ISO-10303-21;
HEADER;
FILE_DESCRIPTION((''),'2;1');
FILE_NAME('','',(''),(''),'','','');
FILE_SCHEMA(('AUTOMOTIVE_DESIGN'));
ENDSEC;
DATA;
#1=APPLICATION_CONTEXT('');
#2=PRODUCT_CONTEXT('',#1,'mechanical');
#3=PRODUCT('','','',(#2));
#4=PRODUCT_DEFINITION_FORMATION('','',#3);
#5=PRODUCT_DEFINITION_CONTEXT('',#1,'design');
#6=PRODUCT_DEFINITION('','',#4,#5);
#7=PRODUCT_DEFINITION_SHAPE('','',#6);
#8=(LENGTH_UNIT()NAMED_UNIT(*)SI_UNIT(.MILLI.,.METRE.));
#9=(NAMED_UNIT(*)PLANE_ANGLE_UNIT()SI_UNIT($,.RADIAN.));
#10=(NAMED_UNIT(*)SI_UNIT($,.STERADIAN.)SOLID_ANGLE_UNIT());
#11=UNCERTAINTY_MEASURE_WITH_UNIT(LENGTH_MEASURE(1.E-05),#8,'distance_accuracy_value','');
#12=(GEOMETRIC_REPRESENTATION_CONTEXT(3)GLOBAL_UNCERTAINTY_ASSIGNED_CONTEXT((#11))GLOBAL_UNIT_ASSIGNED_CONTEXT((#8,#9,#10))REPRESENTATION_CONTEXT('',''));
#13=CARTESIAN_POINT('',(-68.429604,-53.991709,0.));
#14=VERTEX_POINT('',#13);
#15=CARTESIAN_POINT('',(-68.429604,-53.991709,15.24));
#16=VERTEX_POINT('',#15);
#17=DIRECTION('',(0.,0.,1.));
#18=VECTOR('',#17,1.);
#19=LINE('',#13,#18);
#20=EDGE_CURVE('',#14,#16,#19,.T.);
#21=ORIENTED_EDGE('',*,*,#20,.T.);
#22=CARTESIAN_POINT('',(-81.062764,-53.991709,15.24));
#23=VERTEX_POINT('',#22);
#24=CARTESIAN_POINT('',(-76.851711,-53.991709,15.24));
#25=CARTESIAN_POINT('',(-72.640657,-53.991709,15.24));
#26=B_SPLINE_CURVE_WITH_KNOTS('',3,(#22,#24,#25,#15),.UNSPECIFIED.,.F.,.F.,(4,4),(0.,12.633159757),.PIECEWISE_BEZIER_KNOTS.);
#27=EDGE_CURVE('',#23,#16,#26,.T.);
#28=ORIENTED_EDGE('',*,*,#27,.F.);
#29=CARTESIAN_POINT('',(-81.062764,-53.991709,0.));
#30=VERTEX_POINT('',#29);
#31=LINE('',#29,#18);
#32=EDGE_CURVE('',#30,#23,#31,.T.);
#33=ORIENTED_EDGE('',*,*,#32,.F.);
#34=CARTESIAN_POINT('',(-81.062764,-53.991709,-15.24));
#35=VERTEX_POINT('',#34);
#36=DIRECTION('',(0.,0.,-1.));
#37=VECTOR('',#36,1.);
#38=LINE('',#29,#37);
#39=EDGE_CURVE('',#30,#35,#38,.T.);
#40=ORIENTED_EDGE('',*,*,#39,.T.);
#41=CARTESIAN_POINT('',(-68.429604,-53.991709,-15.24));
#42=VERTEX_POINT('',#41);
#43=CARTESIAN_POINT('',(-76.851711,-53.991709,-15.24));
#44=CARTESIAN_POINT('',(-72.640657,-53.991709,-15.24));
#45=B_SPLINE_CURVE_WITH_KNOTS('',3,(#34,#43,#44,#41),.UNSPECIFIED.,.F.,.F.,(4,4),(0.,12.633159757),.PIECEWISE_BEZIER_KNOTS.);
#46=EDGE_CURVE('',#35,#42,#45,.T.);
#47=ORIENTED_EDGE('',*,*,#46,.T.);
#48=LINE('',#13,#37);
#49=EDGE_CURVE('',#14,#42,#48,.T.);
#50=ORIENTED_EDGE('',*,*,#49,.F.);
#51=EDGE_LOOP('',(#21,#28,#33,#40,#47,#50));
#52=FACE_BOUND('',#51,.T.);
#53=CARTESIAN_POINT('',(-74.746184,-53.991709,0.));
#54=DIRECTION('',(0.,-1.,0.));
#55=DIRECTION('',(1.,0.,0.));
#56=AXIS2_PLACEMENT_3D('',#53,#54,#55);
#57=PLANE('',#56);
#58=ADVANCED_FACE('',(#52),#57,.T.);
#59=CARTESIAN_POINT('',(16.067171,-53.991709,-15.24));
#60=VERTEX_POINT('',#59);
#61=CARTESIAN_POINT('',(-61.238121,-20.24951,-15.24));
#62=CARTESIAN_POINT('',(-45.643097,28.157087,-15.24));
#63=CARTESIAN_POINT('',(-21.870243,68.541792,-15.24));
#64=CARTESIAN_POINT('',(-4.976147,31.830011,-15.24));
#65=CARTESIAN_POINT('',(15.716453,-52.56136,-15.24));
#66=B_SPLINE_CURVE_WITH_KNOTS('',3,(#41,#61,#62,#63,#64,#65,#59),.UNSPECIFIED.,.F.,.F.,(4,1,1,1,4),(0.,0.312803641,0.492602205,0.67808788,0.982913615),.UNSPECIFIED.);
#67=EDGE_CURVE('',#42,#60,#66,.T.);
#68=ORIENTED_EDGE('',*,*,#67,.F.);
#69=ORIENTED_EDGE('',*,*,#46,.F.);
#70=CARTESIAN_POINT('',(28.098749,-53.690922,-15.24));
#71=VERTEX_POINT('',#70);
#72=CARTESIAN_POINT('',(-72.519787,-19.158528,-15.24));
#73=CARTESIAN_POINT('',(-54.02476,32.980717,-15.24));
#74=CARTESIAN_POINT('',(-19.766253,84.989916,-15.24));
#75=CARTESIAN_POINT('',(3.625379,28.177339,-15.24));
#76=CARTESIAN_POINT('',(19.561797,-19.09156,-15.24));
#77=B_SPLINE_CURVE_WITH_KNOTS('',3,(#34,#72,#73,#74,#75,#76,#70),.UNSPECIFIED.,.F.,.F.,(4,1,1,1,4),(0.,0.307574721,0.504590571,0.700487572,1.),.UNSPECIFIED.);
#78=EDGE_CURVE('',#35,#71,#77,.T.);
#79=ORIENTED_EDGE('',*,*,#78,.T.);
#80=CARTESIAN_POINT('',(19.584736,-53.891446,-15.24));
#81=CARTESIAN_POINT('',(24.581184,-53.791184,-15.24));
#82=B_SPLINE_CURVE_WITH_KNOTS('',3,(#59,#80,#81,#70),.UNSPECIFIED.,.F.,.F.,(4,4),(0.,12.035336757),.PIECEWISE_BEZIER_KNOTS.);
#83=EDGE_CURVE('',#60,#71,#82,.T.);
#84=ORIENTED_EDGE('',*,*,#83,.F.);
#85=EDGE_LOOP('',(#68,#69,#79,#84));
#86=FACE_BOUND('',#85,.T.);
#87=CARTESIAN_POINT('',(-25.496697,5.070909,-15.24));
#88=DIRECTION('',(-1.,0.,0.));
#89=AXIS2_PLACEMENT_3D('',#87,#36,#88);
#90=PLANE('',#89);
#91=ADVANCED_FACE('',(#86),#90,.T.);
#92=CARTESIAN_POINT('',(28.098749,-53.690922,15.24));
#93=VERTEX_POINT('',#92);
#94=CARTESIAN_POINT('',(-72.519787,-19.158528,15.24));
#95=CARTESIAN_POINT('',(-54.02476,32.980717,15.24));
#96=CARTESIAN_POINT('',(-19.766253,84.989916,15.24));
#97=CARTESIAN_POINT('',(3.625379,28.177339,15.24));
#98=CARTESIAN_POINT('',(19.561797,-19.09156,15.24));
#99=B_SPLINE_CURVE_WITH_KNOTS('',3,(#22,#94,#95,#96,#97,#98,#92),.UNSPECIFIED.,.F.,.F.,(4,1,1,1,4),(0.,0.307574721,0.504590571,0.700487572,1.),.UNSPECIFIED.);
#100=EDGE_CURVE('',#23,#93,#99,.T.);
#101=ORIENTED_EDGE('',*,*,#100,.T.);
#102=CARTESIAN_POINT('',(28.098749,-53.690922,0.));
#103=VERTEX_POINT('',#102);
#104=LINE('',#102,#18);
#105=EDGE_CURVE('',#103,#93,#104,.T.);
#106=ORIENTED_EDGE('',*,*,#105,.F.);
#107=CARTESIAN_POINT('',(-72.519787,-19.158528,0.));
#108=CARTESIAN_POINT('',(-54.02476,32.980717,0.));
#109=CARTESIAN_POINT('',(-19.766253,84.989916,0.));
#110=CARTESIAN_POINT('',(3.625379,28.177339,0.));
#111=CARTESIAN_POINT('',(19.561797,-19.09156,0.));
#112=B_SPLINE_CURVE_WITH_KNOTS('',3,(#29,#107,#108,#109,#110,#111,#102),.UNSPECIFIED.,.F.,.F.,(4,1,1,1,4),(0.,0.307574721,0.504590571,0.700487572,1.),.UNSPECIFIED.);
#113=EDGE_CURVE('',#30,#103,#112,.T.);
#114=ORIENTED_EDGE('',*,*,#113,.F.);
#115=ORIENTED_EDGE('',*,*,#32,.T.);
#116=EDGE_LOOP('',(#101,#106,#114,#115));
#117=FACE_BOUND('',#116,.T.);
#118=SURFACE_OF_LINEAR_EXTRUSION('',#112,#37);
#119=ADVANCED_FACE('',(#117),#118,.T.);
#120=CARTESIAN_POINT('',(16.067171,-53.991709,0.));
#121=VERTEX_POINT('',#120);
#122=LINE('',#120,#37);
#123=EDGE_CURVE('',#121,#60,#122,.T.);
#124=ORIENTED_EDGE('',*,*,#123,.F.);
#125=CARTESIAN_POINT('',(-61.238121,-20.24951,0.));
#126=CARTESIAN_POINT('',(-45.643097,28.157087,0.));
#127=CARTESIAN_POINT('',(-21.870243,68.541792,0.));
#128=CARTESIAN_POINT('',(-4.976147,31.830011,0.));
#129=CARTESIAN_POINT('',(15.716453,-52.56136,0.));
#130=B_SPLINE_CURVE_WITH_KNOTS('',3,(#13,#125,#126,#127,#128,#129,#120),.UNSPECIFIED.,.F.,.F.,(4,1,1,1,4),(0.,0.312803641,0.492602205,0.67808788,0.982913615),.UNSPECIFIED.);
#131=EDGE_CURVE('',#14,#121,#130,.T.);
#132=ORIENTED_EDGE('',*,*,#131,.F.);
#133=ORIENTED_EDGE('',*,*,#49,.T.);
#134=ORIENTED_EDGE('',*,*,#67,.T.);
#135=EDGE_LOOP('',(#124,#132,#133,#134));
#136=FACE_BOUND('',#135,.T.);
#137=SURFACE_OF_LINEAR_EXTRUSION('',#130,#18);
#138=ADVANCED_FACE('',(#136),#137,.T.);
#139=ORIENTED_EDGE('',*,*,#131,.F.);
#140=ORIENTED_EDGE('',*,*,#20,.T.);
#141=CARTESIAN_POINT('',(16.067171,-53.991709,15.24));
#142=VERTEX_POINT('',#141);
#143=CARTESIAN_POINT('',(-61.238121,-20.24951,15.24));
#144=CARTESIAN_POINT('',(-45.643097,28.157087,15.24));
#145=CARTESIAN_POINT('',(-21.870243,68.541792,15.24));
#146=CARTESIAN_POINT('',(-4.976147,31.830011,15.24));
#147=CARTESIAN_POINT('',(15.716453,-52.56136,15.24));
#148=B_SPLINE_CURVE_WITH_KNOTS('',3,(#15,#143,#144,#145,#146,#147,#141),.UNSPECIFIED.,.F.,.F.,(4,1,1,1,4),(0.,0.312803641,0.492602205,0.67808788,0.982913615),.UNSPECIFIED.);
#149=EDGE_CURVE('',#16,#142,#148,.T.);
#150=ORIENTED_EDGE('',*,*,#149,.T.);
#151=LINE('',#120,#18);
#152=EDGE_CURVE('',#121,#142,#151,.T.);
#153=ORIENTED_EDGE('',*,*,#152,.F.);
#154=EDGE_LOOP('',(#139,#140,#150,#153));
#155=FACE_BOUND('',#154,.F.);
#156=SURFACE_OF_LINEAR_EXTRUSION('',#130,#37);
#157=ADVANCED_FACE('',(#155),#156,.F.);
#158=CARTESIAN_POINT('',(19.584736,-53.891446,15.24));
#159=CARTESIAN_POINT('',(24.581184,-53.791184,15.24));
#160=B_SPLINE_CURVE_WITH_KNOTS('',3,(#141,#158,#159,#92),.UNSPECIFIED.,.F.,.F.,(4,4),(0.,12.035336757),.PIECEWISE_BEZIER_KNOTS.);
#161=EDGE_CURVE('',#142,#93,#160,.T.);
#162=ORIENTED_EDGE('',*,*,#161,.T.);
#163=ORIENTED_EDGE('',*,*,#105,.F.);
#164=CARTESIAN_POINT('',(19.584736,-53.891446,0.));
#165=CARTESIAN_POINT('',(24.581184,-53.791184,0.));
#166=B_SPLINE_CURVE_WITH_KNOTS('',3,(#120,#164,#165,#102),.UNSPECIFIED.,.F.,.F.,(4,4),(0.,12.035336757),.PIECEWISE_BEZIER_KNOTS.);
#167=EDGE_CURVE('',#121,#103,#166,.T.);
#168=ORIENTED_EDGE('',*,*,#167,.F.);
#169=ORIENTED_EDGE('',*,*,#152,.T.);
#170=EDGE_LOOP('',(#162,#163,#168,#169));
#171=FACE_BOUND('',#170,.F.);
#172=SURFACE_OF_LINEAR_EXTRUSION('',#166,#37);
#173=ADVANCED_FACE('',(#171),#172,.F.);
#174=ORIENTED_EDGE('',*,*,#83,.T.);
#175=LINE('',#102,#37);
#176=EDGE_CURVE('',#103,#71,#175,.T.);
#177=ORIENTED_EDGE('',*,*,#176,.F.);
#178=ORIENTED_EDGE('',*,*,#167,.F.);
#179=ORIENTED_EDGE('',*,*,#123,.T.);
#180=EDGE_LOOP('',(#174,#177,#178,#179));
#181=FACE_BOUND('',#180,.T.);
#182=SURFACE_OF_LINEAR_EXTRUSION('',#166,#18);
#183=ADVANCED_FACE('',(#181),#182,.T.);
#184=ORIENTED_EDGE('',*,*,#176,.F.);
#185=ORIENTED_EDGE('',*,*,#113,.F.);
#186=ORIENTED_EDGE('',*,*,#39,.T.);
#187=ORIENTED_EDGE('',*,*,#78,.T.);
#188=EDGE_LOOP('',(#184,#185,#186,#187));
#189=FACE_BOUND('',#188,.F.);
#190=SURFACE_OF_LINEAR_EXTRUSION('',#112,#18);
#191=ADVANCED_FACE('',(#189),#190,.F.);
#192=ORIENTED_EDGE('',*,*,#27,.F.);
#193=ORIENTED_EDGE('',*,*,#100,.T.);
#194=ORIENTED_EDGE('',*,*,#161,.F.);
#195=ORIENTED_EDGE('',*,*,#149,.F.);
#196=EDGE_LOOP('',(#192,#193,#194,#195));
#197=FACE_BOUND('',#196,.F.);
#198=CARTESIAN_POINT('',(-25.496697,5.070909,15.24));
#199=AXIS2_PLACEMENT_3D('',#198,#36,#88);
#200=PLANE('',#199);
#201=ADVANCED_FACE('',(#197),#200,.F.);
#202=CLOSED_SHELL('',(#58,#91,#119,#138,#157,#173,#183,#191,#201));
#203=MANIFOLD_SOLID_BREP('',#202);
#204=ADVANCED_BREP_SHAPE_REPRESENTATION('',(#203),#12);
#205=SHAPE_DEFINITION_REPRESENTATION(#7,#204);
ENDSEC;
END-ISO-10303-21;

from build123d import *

# Parameters (mm, degrees)
F1_DEPTH = 15.24


with BuildPart() as f1:
    # F0 (on Top) → F1 (new body, symmetric)
    with BuildSketch(Plane.XY):
        with BuildLine():
            add(Edge.make_bspline(
                [(-81.0627639294, -53.9917089045), (-72.5197874696, -19.1585278886), (-54.0247601816, 32.9807166244), (-19.7662531538, 84.9899163352), (3.6253786631, 28.1773385335), (19.5617973002, -19.0915599193), (28.0987489969, -53.6909215152)],
                knots=[0, 0, 0, 0, 0.3075747213, 0.5045905715, 0.700487572, 1, 1, 1, 1], degree=3))
            add(Edge.make_bspline(
                [(-81.0627639294, -53.9917089045), (-76.8517106771, -53.9917089045), (-72.6406574249, -53.9917089045), (-68.4296041727, -53.9917089045)],
                knots=[0, 0, 0, 0, 12.6331597567, 12.6331597567, 12.6331597567, 12.6331597567], degree=3))
            add(Edge.make_bspline(
                [(-68.4296041727, -53.9917089045), (-61.2381206293, -20.2495097403), (-45.6430965514, 28.1570874772), (-21.8702426997, 68.5417920783), (-4.9761473076, 31.8300107745), (15.7164527353, -52.5613601463), (16.0671714693, -53.9917089045)],
                knots=[0, 0, 0, 0, 0.3128036408, 0.4926022052, 0.6780878804, 0.9829136146, 0.9829136146, 0.9829136146, 0.9829136146], degree=3))
            add(Edge.make_bspline(
                [(16.0671714693, -53.9917089045), (19.5847364763, -53.8914464414), (24.5811839898, -53.7911839783), (28.0987489969, -53.6909215152)],
                knots=[0, 0, 0, 0, 12.035336757, 12.035336757, 12.035336757, 12.035336757], degree=3))
        make_face()
    extrude(amount=F1_DEPTH, both=True)


solid = f1.part
